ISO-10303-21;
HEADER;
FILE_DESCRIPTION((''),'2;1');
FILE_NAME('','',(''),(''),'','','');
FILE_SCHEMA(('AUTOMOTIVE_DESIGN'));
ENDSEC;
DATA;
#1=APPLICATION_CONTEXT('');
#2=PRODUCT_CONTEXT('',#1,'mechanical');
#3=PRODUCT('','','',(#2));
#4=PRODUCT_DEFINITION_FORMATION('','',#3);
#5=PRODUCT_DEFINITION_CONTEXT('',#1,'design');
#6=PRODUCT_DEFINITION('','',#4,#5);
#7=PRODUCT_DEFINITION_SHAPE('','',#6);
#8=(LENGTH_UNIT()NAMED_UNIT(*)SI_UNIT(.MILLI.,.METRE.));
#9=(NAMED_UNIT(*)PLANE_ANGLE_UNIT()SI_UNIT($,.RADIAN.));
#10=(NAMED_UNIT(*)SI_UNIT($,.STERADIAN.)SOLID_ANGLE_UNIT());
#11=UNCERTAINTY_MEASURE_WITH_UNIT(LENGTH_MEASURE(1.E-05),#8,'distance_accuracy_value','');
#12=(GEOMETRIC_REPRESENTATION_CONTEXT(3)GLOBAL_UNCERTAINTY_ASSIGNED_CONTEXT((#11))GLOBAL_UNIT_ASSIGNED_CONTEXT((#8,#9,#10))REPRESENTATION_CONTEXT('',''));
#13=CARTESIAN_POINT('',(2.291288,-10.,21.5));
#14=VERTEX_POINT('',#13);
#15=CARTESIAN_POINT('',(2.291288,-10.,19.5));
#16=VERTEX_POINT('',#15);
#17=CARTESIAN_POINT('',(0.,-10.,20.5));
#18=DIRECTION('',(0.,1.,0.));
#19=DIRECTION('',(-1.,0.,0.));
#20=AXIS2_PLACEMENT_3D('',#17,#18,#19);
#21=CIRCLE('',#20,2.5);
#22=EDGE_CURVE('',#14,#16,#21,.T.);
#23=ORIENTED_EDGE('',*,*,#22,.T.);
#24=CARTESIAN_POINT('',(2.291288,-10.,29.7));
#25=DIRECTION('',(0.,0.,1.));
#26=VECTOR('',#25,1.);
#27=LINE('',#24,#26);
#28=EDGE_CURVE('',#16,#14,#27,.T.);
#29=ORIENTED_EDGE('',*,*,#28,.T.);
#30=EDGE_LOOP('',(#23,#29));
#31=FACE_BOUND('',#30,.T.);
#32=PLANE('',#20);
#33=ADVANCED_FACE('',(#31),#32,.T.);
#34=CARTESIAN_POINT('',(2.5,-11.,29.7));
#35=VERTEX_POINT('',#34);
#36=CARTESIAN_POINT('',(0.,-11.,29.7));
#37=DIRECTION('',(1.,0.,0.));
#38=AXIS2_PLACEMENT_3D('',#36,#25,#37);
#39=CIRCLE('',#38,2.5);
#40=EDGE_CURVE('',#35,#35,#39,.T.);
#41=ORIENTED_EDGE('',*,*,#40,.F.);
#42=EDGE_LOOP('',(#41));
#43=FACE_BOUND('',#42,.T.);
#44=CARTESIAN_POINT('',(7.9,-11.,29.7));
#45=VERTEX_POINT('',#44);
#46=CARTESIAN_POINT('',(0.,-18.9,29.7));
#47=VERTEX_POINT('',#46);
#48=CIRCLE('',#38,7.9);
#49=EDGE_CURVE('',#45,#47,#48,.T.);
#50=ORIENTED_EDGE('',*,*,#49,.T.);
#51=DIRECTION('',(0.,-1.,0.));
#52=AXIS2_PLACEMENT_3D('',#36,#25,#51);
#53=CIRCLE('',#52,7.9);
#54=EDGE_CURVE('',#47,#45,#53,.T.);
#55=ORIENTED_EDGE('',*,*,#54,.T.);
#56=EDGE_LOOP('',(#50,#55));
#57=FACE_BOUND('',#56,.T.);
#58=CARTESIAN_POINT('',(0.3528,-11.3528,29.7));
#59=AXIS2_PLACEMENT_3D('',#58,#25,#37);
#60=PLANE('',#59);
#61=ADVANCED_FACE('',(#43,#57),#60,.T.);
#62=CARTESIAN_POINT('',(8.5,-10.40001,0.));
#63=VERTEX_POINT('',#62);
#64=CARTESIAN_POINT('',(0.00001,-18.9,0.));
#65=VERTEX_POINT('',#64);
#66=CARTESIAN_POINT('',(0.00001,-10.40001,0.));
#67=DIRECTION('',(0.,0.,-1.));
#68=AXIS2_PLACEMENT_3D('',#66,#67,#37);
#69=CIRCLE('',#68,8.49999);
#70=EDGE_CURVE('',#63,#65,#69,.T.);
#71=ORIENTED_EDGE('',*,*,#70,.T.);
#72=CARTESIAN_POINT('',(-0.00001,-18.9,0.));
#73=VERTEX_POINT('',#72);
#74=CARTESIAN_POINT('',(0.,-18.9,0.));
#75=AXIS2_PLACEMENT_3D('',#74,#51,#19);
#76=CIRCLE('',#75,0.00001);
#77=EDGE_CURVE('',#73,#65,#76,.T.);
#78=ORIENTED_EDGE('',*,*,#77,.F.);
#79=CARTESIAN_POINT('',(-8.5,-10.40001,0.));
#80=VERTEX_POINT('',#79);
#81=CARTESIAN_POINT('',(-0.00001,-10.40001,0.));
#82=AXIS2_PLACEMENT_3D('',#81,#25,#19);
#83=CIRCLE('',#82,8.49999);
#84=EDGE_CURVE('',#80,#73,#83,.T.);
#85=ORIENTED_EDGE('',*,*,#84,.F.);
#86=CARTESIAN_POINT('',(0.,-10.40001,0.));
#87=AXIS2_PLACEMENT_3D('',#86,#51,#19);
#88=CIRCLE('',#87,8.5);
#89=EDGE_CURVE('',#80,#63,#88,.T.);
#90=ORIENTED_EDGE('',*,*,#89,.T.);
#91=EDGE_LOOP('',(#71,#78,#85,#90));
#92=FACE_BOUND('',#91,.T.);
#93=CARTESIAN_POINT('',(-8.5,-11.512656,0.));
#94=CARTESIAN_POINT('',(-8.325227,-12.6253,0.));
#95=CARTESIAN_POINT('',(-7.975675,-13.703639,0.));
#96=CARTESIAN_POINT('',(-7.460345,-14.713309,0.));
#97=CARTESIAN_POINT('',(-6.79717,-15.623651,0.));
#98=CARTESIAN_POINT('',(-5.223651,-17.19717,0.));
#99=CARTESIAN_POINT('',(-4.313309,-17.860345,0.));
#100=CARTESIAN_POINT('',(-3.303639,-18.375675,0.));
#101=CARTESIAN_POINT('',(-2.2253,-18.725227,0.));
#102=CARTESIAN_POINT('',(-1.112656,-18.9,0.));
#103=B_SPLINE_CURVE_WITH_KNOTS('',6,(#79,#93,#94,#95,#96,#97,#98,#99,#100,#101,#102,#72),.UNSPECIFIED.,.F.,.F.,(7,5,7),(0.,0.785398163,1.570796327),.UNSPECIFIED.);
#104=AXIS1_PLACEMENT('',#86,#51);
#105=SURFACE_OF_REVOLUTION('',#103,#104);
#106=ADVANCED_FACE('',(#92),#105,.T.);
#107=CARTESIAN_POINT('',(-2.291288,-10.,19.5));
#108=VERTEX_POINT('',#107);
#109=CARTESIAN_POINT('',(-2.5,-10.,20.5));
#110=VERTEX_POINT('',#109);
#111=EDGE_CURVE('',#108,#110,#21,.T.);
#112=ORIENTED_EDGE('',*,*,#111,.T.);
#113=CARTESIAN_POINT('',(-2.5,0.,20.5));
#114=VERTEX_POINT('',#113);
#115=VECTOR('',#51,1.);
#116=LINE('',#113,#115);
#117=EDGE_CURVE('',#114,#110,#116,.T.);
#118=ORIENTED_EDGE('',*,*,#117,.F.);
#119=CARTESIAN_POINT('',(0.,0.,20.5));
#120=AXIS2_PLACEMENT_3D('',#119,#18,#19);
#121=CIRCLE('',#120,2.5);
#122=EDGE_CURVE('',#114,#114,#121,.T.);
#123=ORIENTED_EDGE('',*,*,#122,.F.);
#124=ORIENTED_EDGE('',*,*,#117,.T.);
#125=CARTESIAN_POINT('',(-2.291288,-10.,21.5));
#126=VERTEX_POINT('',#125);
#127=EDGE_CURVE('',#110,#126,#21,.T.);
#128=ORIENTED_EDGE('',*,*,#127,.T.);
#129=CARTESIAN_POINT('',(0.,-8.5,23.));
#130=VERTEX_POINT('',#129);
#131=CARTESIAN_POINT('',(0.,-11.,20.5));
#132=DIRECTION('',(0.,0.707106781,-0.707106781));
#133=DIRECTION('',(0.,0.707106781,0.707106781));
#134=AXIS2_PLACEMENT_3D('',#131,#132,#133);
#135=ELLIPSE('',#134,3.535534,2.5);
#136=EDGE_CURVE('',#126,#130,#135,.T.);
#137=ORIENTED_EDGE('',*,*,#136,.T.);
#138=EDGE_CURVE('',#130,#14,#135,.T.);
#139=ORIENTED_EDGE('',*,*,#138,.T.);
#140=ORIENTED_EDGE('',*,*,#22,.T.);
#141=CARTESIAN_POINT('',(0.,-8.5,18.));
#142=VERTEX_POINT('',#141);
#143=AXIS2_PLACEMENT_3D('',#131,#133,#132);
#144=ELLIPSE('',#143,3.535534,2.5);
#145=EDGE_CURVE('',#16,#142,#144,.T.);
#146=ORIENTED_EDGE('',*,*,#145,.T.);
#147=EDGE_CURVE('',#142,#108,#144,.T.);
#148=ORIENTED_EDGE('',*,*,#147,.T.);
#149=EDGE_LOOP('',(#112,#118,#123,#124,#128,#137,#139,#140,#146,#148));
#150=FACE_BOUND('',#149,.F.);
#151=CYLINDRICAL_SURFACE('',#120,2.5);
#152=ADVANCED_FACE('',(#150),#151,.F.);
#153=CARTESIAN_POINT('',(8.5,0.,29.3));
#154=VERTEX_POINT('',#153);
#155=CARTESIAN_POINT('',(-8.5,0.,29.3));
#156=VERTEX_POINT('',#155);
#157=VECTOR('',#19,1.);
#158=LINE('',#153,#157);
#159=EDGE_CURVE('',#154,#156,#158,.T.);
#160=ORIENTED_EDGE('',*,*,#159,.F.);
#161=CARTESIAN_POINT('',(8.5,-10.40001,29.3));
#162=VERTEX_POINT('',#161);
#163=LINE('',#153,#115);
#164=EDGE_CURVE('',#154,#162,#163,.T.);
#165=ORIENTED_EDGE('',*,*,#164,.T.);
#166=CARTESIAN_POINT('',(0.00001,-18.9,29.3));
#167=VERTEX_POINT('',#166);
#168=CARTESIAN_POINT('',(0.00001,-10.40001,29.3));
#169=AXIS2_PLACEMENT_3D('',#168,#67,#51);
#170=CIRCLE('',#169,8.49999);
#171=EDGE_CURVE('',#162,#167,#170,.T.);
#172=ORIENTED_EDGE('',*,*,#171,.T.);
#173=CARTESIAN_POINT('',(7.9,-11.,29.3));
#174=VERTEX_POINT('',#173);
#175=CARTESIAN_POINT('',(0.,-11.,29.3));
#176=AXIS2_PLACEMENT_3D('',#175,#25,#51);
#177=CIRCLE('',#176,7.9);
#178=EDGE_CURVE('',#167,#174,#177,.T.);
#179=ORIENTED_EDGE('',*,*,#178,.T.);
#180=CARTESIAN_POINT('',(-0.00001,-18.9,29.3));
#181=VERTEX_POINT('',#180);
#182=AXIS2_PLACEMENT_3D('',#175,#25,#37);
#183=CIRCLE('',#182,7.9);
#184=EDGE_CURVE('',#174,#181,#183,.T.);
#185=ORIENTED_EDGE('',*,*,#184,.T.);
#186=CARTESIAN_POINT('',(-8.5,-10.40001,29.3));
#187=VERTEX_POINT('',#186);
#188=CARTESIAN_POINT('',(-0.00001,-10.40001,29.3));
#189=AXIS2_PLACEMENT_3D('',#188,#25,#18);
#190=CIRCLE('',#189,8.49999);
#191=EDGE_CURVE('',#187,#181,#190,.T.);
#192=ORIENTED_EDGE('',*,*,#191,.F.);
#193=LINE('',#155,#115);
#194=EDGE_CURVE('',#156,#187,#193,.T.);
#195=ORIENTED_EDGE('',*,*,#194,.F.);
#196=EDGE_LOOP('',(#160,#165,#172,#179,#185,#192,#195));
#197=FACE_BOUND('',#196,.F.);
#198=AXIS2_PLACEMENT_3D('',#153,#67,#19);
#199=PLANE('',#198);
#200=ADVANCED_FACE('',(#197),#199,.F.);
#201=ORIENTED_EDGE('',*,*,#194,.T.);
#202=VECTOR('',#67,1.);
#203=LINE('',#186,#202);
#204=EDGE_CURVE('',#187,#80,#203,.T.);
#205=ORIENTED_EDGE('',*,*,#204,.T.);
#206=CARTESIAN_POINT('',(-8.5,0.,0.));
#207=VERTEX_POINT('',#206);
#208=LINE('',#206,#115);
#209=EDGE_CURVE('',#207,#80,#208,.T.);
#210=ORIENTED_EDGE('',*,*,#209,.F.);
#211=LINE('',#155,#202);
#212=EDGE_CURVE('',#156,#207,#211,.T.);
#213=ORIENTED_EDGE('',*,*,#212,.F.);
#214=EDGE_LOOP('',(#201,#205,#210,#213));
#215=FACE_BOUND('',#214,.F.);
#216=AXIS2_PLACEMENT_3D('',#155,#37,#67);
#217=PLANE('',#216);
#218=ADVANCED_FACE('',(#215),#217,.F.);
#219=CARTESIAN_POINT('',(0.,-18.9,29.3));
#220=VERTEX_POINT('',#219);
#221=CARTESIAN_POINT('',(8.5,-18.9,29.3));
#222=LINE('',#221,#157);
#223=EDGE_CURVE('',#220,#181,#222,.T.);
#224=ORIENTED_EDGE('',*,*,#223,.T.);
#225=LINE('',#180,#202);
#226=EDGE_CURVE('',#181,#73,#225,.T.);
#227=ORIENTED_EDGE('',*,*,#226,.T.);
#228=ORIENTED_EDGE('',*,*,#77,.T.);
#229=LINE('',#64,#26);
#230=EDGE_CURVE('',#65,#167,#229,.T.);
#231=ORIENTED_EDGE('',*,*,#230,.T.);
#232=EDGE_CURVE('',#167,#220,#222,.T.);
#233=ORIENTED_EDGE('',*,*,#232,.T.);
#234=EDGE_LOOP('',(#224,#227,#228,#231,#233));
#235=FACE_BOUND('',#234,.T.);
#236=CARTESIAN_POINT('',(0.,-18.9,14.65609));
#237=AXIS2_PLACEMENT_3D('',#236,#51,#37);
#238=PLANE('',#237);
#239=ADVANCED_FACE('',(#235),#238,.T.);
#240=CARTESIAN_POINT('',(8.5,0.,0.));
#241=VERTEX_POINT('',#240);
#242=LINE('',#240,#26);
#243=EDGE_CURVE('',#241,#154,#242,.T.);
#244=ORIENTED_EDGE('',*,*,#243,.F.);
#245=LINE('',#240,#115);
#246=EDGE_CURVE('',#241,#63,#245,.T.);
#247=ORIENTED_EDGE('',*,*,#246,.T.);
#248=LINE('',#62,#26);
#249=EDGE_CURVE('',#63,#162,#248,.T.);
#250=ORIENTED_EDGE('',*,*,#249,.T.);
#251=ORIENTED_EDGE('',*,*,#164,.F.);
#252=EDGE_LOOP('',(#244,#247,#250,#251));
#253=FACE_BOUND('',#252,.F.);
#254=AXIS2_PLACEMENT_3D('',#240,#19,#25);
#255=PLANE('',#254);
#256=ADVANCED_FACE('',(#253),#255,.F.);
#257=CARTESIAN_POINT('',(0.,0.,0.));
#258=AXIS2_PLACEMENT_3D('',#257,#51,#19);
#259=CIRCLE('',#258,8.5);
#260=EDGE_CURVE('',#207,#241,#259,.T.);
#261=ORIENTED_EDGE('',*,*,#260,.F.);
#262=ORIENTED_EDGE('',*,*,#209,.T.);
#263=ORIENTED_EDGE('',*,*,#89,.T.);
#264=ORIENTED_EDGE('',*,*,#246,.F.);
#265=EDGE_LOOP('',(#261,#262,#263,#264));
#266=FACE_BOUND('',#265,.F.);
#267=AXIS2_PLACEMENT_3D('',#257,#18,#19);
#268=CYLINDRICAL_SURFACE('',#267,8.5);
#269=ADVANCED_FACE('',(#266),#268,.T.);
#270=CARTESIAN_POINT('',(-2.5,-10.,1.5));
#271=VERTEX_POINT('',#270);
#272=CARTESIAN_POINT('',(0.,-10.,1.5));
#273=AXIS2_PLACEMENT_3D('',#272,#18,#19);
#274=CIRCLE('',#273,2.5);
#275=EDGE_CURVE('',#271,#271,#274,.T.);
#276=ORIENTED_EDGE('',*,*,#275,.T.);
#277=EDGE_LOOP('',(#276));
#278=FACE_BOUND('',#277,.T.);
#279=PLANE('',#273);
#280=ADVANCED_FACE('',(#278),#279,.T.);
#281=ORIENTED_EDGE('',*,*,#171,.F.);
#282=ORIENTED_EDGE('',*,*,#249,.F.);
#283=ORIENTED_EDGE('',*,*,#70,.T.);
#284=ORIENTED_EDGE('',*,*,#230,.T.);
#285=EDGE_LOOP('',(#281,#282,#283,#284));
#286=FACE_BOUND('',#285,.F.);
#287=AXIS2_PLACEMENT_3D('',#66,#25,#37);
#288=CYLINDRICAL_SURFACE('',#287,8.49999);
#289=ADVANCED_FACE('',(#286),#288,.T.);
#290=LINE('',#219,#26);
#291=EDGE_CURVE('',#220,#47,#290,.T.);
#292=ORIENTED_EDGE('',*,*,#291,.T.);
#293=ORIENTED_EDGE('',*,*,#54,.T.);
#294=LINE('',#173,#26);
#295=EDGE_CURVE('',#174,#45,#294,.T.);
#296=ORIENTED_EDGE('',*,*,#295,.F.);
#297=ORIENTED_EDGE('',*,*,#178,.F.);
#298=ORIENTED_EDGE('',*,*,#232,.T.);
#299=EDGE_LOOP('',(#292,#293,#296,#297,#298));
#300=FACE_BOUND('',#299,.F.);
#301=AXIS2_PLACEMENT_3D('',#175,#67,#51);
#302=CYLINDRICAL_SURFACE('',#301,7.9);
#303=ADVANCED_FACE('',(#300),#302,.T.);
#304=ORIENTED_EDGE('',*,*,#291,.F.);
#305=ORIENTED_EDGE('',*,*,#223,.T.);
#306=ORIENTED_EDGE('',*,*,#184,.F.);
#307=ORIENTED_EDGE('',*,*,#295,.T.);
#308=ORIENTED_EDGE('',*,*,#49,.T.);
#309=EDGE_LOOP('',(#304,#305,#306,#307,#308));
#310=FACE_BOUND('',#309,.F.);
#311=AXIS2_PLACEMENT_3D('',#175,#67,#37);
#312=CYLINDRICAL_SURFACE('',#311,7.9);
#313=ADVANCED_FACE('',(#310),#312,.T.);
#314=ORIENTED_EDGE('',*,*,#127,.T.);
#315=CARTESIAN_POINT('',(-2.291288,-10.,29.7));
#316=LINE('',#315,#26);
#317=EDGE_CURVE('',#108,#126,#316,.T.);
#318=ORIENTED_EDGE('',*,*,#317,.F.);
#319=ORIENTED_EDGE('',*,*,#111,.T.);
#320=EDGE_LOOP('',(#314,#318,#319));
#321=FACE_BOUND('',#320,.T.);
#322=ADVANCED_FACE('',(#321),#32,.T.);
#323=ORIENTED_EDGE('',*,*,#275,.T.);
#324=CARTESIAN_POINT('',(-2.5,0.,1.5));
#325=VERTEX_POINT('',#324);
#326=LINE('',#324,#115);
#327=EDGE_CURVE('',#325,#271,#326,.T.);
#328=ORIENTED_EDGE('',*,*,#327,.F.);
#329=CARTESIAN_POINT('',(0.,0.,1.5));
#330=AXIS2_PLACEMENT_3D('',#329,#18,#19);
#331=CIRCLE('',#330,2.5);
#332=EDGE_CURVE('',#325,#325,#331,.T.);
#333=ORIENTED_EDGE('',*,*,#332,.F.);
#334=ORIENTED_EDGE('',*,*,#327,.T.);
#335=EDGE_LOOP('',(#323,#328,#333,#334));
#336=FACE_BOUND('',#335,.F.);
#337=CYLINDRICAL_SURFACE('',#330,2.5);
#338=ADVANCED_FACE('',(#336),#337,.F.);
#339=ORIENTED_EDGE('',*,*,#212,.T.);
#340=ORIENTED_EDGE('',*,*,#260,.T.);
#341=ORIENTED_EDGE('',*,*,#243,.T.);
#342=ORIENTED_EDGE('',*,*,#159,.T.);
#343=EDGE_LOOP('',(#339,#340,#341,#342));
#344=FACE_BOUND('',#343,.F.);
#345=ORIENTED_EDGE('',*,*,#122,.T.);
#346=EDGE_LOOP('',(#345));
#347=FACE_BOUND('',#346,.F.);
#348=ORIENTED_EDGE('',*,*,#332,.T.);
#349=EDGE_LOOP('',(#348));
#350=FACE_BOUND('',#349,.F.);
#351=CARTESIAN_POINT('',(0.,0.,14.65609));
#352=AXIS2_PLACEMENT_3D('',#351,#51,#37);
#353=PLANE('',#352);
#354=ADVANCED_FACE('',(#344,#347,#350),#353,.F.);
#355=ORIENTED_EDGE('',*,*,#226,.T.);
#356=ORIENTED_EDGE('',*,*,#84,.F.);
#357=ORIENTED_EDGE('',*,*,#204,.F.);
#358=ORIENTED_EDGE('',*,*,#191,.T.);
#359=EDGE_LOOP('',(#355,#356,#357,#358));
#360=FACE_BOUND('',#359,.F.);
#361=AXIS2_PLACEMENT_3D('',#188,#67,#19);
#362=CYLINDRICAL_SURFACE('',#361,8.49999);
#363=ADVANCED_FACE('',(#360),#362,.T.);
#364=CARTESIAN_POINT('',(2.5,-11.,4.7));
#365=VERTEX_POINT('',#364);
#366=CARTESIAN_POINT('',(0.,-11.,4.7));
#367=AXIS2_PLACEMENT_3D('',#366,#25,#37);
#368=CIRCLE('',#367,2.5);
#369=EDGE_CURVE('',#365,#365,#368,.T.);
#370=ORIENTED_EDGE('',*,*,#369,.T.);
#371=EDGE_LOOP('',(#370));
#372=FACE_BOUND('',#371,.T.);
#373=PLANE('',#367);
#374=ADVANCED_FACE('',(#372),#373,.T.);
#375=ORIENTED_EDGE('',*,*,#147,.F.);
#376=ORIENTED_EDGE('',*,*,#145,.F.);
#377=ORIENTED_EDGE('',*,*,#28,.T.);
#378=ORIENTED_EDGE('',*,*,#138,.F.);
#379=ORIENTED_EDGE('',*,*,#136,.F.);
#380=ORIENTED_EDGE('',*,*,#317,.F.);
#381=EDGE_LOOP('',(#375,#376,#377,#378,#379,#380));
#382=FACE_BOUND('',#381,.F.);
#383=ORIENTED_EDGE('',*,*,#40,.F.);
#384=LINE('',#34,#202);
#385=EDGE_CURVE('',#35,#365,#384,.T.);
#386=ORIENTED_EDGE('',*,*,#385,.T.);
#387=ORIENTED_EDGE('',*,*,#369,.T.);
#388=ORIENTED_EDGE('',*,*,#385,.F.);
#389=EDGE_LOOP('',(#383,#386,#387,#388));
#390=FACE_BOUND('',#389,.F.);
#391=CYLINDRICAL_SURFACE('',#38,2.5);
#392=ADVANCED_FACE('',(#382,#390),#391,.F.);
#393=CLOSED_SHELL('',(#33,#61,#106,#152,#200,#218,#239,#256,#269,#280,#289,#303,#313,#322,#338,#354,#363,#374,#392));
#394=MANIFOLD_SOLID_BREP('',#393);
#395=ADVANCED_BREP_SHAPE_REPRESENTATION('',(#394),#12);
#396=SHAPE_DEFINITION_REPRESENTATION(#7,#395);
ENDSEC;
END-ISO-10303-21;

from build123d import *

# Parameters (mm, degrees)
F1_DEPTH = 18.9
F2_R     = 8.49999
F4_DEPTH = 0.4
F5_R     = 2.5
F6_DEPTH = 10
F7_R     = 2.5
F8_DEPTH = 25


# Not quite as in the source:
# - a fillet or chamfer is up to 0.001 mm smaller than in the source, because OpenCascade refuses the exact size


with BuildPart() as f1:
    # F0 (on Front) → F1 (new body)
    with BuildSketch(Plane.XZ):
        with BuildLine():
            ThreePointArc((-8.5, 0), (0, 8.5), (8.5, 0))
            Line((8.5, 0), (8.5, 29.3))
            Line((8.5, 29.3), (-8.5, 29.3))
            Line((-8.5, 29.3), (-8.5, 0))
        make_face()
        with BuildLine():
            Line((-8.5, 0), (8.5, 0))
            ThreePointArc((8.5, 0), (0, 8.5), (-8.5, 0))
        make_face()
        with BuildLine():
            ThreePointArc((-8.5, 0), (0, -8.5), (8.5, 0))
            Line((8.5, 0), (-8.5, 0))
        make_face()
    extrude(amount=F1_DEPTH)

    # F2 (radius 8.5 in the source; OpenCascade refuses exactly that, so slightly less here)
    f2_edges = [f1.edges().sort_by_distance(p)[0] for p in [
        (8.5, -18.9, 14.65),
    ]]
    fillet(f2_edges, radius=F2_R)

    # F3 (on face) → F4 (join)
    with BuildSketch(Plane.XY.offset(29.3)):
        with BuildLine():
            ThreePointArc((0, -18.9), (5.5861435714, -16.5861435714), (7.9, -11))
            ThreePointArc((7.9, -11), (-5.5861435714, -5.4138564286), (0, -18.9))
        make_face()
    extrude(amount=F4_DEPTH)

    # F5 (on face) → F6 (cut)
    with BuildSketch(Plane(origin=(0, 0, 0), x_dir=(-1, 0, 0), z_dir=(0, 1, 0))):
        with Locations((0, 20.5)):
            Circle(F5_R)
        with Locations((0, 1.5)):
            Circle(F5_R)
    extrude(amount=-F6_DEPTH, mode=Mode.SUBTRACT)

    # F7 (on face) → F8 (cut)
    with BuildSketch(Plane.XY.offset(29.7)):
        with Locations((0, -11)):
            Circle(F7_R)
    extrude(amount=-F8_DEPTH, mode=Mode.SUBTRACT)


solid = f1.part
